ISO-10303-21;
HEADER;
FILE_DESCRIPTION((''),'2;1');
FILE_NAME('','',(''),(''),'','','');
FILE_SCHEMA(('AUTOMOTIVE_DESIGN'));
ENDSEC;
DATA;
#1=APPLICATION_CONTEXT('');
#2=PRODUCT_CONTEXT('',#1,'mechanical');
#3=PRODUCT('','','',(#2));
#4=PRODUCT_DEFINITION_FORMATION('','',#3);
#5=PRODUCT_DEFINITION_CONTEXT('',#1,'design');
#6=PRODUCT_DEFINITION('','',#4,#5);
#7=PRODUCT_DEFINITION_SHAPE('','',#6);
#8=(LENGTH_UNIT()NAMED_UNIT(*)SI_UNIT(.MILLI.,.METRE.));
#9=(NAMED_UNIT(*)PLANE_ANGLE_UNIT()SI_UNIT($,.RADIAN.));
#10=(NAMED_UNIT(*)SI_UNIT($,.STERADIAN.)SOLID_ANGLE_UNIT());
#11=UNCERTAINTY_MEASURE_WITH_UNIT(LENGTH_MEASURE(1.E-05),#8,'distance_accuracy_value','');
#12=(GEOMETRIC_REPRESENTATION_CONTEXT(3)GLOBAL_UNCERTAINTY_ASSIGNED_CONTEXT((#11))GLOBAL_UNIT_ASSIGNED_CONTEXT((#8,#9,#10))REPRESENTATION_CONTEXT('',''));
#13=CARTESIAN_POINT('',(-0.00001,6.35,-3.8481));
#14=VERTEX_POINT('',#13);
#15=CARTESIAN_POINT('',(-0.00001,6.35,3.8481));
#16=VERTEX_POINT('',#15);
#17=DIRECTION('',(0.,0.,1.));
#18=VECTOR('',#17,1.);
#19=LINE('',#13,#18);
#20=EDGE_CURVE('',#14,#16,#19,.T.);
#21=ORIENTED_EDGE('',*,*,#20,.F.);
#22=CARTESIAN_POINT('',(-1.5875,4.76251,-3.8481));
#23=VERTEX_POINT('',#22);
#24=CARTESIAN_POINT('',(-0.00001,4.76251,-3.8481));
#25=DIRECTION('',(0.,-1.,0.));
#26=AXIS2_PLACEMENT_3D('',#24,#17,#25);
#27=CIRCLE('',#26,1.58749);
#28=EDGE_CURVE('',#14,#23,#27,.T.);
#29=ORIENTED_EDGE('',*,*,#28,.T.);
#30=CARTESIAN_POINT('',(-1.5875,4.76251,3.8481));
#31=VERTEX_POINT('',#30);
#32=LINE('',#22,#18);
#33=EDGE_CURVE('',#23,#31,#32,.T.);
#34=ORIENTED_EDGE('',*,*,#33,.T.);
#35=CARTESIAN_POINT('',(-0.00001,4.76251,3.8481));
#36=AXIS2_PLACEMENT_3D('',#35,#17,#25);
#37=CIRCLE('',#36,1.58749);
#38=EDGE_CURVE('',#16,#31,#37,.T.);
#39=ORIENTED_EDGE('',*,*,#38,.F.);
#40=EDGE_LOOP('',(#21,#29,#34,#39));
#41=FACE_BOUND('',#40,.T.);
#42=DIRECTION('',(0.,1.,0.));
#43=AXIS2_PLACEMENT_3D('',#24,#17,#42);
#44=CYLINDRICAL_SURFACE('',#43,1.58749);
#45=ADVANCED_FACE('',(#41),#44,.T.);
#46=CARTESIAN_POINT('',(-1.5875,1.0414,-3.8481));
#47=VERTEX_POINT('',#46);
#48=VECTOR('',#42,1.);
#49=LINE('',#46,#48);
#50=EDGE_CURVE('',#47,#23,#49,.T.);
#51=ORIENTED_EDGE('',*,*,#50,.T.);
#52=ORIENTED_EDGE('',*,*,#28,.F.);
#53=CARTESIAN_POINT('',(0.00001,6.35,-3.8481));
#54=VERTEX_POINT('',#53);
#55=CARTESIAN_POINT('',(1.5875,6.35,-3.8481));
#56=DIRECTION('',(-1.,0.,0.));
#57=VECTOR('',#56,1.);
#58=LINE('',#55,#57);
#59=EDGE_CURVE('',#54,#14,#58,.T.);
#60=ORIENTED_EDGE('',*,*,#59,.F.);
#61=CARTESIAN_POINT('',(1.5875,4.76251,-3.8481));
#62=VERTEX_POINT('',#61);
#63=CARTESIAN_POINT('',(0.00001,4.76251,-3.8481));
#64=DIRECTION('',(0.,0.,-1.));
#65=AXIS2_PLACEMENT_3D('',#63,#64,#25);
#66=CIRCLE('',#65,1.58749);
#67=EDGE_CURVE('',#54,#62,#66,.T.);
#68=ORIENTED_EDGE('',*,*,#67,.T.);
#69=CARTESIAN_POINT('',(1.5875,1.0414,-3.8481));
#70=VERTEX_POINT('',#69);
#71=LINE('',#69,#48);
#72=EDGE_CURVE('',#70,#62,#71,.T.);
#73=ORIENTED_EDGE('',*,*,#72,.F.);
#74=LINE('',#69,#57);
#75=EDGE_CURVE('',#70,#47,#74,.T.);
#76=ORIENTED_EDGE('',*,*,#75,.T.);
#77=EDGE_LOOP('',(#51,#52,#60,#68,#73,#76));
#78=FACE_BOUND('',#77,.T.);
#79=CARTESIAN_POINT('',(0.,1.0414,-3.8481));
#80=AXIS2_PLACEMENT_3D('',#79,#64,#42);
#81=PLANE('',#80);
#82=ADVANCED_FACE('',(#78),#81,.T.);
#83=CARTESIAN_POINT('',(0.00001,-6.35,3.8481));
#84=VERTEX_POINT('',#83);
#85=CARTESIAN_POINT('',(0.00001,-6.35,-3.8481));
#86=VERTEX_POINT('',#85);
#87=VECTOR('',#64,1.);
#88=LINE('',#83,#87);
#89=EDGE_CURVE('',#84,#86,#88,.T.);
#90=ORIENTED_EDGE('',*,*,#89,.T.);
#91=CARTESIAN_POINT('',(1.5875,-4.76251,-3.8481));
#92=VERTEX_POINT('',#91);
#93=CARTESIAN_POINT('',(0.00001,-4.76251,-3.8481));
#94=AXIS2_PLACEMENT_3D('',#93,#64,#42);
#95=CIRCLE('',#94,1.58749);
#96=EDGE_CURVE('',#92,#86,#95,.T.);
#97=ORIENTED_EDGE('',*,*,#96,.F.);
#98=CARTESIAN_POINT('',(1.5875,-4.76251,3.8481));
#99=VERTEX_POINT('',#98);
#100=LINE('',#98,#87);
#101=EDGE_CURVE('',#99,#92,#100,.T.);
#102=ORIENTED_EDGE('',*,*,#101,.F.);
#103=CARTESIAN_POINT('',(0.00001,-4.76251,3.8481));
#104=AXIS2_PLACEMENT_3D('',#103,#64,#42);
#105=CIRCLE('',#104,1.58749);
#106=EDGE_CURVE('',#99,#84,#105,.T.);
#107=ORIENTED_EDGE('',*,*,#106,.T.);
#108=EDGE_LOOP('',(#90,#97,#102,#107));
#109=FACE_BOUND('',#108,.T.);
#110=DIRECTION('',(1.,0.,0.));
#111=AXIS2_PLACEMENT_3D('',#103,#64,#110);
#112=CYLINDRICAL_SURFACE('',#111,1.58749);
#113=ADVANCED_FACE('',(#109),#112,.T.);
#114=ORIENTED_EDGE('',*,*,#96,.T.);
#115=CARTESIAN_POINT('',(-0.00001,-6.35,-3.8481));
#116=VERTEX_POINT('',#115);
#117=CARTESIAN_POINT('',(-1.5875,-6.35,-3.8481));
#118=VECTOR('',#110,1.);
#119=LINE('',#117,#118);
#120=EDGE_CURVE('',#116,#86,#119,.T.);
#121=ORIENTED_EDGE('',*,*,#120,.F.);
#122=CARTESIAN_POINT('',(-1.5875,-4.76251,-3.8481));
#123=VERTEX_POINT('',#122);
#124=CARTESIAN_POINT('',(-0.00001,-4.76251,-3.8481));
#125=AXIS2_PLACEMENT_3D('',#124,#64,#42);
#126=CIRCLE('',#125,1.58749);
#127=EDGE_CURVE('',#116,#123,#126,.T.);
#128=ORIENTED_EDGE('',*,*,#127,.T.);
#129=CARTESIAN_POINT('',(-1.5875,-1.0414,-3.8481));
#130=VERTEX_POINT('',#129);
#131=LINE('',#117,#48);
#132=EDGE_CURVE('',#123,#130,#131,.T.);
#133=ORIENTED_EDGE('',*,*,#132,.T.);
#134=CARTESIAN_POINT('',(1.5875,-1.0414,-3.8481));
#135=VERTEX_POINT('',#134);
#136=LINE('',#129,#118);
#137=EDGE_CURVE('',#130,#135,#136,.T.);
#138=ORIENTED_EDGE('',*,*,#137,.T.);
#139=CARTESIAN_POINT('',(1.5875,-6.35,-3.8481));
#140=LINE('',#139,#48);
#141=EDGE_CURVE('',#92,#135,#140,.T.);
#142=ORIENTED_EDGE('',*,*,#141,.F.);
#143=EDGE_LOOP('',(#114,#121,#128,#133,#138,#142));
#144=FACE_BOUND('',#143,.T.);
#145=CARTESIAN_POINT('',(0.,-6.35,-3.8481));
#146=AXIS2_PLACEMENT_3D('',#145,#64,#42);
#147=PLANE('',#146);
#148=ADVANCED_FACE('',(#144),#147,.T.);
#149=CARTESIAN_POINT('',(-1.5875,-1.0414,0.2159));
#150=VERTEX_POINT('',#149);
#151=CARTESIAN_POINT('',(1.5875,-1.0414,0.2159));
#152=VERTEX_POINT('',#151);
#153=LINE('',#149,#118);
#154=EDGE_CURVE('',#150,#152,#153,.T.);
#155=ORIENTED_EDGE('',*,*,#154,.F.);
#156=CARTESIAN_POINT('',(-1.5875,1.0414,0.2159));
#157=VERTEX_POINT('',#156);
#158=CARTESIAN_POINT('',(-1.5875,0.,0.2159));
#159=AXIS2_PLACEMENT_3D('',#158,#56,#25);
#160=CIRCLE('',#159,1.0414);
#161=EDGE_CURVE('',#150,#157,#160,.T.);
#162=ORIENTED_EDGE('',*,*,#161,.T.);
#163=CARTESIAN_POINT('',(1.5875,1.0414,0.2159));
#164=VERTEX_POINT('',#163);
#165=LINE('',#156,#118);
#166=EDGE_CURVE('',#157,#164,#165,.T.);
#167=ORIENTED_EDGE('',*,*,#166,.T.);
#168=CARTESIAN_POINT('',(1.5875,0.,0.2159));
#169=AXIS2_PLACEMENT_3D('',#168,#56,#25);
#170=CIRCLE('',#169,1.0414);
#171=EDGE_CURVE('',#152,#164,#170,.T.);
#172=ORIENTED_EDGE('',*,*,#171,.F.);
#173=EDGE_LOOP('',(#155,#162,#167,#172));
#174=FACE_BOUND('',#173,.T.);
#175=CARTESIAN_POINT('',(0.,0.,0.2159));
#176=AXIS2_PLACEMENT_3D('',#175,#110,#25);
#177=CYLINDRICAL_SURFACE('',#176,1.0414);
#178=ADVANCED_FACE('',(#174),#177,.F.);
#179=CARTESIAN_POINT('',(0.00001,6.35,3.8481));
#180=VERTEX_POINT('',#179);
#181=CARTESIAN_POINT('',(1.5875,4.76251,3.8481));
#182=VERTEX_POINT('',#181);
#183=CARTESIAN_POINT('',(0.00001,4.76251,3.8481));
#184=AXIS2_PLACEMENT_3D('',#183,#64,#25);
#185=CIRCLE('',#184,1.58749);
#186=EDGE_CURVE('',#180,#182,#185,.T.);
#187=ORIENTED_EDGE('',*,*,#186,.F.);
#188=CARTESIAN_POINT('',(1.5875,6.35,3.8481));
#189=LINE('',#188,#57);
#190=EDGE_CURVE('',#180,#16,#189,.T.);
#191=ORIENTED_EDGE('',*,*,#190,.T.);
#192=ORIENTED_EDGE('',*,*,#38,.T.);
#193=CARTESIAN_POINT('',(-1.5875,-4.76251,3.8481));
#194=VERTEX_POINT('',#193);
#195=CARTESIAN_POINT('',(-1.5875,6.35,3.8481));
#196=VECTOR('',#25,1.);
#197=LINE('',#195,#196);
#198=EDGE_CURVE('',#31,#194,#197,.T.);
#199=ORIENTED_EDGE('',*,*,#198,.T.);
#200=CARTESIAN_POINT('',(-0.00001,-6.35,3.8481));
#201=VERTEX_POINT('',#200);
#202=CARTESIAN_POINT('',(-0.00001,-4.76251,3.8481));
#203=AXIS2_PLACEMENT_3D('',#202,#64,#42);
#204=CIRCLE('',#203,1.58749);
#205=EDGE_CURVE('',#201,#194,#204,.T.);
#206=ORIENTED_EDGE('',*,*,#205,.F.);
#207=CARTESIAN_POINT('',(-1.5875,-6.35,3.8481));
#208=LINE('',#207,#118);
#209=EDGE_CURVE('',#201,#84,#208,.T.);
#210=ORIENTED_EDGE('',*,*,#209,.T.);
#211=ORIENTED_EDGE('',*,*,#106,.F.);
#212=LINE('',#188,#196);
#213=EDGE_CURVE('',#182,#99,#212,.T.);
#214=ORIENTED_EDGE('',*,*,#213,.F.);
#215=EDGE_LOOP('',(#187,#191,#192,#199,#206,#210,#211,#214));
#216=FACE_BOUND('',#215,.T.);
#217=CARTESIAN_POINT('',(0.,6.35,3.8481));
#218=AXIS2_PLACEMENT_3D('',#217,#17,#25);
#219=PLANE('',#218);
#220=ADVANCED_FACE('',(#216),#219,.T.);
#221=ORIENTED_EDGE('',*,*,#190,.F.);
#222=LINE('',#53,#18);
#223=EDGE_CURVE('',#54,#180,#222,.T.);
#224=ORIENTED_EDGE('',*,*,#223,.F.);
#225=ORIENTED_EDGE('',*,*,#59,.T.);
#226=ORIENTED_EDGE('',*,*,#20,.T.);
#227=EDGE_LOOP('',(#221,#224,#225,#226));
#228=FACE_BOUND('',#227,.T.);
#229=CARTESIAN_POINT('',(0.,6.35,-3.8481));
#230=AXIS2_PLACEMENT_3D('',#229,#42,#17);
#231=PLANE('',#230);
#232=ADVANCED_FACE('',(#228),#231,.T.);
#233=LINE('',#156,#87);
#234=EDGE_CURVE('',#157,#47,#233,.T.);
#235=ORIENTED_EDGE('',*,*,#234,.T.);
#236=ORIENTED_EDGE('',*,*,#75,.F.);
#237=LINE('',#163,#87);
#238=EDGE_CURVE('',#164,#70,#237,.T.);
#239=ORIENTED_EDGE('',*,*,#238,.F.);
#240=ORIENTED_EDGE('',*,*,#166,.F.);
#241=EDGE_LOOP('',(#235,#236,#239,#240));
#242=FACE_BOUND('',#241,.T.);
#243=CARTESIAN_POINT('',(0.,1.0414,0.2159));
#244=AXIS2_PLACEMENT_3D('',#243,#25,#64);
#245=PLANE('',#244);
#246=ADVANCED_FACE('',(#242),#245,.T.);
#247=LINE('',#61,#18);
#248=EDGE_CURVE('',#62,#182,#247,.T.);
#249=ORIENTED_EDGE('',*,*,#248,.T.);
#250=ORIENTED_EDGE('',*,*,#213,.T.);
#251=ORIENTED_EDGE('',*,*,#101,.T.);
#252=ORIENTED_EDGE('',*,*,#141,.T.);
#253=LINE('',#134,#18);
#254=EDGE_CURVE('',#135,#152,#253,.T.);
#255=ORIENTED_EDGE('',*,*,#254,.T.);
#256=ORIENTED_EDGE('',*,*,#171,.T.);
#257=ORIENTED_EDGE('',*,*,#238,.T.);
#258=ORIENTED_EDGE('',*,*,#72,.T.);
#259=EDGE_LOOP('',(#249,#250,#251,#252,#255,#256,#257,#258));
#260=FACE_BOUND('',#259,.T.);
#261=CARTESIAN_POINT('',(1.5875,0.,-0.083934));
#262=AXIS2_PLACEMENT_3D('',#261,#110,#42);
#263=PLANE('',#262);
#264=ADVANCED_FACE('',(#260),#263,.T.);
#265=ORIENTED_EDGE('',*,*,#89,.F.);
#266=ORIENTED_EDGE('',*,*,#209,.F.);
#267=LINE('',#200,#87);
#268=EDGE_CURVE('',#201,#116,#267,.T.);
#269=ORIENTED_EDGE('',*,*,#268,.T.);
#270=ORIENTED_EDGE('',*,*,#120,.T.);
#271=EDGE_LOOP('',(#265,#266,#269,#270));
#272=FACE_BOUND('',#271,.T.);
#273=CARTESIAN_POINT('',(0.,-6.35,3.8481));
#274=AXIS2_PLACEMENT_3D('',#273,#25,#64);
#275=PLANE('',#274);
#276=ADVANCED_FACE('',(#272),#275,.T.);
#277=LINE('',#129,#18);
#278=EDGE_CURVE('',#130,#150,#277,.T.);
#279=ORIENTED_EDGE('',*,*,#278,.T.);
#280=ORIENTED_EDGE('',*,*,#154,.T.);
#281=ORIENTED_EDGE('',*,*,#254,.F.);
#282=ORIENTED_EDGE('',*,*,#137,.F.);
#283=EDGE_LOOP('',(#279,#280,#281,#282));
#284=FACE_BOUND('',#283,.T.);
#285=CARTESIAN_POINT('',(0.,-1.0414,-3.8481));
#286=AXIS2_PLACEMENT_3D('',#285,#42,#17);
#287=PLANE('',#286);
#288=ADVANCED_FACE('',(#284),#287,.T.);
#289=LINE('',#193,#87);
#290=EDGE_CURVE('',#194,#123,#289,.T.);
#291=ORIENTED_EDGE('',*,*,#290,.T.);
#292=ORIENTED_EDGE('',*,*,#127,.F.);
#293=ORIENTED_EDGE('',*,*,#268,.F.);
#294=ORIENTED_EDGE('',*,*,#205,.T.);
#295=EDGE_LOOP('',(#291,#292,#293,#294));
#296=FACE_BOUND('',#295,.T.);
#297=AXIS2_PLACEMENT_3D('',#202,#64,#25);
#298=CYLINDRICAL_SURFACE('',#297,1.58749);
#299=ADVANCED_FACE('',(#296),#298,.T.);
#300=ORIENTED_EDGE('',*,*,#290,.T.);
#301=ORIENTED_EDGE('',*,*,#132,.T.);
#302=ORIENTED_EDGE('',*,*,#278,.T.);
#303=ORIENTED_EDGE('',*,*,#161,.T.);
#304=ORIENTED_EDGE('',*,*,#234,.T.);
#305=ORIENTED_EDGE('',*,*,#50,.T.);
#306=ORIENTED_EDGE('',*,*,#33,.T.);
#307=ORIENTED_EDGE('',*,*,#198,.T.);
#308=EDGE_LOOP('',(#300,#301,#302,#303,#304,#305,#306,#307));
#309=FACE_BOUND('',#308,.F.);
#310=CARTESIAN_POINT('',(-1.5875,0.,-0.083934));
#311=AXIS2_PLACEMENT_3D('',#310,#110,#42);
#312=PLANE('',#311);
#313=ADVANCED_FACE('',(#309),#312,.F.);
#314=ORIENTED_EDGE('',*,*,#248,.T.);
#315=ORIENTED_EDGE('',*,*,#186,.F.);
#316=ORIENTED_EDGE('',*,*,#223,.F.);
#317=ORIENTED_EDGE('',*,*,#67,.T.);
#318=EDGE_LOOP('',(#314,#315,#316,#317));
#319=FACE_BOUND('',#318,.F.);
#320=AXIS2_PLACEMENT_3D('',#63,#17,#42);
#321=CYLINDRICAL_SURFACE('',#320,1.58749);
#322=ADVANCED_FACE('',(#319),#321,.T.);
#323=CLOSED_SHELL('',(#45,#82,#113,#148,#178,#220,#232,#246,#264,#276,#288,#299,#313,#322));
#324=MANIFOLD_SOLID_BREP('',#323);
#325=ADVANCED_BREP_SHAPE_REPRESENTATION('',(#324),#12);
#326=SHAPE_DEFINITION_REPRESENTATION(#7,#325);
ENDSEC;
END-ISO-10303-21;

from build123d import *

# Parameters (mm, degrees)
F1_DEPTH = 1.5875
F2_R     = 1.58749


# Not quite as in the source:
# - a fillet or chamfer is up to 0.001 mm smaller than in the source, because OpenCascade refuses the exact size


with BuildPart() as f1:
    # F0 (on Right) → F1 (new body, symmetric)
    with BuildSketch(Plane.YZ):
        with BuildLine():
            Line((6.35, 3.8481), (-6.35, 3.8481))
            Line((-6.35, 3.8481), (-6.35, -3.8481))
            Line((-6.35, -3.8481), (-1.0414, -3.8481))
            Line((-1.0414, -3.8481), (-1.0414, 0.2159))
            ThreePointArc((-1.0414, 0.2159), (0, 1.2573), (1.0414, 0.2159))
            Line((1.0414, 0.2159), (1.0414, -3.8481))
            Line((1.0414, -3.8481), (6.35, -3.8481))
            Line((6.35, -3.8481), (6.35, 3.8481))
        make_face()
    extrude(amount=F1_DEPTH, both=True)

    # F2 (radius 1.5875 in the source; OpenCascade refuses exactly that, so slightly less here)
    f2_edges = [f1.edges().sort_by_distance(p)[0] for p in [
        (-1.5875, -6.35, 0),
        (1.5875, -6.35, 0),
        (1.5875, 6.35, 0),
        (-1.5875, 6.35, 0),
    ]]
    fillet(f2_edges, radius=F2_R)


solid = f1.part
